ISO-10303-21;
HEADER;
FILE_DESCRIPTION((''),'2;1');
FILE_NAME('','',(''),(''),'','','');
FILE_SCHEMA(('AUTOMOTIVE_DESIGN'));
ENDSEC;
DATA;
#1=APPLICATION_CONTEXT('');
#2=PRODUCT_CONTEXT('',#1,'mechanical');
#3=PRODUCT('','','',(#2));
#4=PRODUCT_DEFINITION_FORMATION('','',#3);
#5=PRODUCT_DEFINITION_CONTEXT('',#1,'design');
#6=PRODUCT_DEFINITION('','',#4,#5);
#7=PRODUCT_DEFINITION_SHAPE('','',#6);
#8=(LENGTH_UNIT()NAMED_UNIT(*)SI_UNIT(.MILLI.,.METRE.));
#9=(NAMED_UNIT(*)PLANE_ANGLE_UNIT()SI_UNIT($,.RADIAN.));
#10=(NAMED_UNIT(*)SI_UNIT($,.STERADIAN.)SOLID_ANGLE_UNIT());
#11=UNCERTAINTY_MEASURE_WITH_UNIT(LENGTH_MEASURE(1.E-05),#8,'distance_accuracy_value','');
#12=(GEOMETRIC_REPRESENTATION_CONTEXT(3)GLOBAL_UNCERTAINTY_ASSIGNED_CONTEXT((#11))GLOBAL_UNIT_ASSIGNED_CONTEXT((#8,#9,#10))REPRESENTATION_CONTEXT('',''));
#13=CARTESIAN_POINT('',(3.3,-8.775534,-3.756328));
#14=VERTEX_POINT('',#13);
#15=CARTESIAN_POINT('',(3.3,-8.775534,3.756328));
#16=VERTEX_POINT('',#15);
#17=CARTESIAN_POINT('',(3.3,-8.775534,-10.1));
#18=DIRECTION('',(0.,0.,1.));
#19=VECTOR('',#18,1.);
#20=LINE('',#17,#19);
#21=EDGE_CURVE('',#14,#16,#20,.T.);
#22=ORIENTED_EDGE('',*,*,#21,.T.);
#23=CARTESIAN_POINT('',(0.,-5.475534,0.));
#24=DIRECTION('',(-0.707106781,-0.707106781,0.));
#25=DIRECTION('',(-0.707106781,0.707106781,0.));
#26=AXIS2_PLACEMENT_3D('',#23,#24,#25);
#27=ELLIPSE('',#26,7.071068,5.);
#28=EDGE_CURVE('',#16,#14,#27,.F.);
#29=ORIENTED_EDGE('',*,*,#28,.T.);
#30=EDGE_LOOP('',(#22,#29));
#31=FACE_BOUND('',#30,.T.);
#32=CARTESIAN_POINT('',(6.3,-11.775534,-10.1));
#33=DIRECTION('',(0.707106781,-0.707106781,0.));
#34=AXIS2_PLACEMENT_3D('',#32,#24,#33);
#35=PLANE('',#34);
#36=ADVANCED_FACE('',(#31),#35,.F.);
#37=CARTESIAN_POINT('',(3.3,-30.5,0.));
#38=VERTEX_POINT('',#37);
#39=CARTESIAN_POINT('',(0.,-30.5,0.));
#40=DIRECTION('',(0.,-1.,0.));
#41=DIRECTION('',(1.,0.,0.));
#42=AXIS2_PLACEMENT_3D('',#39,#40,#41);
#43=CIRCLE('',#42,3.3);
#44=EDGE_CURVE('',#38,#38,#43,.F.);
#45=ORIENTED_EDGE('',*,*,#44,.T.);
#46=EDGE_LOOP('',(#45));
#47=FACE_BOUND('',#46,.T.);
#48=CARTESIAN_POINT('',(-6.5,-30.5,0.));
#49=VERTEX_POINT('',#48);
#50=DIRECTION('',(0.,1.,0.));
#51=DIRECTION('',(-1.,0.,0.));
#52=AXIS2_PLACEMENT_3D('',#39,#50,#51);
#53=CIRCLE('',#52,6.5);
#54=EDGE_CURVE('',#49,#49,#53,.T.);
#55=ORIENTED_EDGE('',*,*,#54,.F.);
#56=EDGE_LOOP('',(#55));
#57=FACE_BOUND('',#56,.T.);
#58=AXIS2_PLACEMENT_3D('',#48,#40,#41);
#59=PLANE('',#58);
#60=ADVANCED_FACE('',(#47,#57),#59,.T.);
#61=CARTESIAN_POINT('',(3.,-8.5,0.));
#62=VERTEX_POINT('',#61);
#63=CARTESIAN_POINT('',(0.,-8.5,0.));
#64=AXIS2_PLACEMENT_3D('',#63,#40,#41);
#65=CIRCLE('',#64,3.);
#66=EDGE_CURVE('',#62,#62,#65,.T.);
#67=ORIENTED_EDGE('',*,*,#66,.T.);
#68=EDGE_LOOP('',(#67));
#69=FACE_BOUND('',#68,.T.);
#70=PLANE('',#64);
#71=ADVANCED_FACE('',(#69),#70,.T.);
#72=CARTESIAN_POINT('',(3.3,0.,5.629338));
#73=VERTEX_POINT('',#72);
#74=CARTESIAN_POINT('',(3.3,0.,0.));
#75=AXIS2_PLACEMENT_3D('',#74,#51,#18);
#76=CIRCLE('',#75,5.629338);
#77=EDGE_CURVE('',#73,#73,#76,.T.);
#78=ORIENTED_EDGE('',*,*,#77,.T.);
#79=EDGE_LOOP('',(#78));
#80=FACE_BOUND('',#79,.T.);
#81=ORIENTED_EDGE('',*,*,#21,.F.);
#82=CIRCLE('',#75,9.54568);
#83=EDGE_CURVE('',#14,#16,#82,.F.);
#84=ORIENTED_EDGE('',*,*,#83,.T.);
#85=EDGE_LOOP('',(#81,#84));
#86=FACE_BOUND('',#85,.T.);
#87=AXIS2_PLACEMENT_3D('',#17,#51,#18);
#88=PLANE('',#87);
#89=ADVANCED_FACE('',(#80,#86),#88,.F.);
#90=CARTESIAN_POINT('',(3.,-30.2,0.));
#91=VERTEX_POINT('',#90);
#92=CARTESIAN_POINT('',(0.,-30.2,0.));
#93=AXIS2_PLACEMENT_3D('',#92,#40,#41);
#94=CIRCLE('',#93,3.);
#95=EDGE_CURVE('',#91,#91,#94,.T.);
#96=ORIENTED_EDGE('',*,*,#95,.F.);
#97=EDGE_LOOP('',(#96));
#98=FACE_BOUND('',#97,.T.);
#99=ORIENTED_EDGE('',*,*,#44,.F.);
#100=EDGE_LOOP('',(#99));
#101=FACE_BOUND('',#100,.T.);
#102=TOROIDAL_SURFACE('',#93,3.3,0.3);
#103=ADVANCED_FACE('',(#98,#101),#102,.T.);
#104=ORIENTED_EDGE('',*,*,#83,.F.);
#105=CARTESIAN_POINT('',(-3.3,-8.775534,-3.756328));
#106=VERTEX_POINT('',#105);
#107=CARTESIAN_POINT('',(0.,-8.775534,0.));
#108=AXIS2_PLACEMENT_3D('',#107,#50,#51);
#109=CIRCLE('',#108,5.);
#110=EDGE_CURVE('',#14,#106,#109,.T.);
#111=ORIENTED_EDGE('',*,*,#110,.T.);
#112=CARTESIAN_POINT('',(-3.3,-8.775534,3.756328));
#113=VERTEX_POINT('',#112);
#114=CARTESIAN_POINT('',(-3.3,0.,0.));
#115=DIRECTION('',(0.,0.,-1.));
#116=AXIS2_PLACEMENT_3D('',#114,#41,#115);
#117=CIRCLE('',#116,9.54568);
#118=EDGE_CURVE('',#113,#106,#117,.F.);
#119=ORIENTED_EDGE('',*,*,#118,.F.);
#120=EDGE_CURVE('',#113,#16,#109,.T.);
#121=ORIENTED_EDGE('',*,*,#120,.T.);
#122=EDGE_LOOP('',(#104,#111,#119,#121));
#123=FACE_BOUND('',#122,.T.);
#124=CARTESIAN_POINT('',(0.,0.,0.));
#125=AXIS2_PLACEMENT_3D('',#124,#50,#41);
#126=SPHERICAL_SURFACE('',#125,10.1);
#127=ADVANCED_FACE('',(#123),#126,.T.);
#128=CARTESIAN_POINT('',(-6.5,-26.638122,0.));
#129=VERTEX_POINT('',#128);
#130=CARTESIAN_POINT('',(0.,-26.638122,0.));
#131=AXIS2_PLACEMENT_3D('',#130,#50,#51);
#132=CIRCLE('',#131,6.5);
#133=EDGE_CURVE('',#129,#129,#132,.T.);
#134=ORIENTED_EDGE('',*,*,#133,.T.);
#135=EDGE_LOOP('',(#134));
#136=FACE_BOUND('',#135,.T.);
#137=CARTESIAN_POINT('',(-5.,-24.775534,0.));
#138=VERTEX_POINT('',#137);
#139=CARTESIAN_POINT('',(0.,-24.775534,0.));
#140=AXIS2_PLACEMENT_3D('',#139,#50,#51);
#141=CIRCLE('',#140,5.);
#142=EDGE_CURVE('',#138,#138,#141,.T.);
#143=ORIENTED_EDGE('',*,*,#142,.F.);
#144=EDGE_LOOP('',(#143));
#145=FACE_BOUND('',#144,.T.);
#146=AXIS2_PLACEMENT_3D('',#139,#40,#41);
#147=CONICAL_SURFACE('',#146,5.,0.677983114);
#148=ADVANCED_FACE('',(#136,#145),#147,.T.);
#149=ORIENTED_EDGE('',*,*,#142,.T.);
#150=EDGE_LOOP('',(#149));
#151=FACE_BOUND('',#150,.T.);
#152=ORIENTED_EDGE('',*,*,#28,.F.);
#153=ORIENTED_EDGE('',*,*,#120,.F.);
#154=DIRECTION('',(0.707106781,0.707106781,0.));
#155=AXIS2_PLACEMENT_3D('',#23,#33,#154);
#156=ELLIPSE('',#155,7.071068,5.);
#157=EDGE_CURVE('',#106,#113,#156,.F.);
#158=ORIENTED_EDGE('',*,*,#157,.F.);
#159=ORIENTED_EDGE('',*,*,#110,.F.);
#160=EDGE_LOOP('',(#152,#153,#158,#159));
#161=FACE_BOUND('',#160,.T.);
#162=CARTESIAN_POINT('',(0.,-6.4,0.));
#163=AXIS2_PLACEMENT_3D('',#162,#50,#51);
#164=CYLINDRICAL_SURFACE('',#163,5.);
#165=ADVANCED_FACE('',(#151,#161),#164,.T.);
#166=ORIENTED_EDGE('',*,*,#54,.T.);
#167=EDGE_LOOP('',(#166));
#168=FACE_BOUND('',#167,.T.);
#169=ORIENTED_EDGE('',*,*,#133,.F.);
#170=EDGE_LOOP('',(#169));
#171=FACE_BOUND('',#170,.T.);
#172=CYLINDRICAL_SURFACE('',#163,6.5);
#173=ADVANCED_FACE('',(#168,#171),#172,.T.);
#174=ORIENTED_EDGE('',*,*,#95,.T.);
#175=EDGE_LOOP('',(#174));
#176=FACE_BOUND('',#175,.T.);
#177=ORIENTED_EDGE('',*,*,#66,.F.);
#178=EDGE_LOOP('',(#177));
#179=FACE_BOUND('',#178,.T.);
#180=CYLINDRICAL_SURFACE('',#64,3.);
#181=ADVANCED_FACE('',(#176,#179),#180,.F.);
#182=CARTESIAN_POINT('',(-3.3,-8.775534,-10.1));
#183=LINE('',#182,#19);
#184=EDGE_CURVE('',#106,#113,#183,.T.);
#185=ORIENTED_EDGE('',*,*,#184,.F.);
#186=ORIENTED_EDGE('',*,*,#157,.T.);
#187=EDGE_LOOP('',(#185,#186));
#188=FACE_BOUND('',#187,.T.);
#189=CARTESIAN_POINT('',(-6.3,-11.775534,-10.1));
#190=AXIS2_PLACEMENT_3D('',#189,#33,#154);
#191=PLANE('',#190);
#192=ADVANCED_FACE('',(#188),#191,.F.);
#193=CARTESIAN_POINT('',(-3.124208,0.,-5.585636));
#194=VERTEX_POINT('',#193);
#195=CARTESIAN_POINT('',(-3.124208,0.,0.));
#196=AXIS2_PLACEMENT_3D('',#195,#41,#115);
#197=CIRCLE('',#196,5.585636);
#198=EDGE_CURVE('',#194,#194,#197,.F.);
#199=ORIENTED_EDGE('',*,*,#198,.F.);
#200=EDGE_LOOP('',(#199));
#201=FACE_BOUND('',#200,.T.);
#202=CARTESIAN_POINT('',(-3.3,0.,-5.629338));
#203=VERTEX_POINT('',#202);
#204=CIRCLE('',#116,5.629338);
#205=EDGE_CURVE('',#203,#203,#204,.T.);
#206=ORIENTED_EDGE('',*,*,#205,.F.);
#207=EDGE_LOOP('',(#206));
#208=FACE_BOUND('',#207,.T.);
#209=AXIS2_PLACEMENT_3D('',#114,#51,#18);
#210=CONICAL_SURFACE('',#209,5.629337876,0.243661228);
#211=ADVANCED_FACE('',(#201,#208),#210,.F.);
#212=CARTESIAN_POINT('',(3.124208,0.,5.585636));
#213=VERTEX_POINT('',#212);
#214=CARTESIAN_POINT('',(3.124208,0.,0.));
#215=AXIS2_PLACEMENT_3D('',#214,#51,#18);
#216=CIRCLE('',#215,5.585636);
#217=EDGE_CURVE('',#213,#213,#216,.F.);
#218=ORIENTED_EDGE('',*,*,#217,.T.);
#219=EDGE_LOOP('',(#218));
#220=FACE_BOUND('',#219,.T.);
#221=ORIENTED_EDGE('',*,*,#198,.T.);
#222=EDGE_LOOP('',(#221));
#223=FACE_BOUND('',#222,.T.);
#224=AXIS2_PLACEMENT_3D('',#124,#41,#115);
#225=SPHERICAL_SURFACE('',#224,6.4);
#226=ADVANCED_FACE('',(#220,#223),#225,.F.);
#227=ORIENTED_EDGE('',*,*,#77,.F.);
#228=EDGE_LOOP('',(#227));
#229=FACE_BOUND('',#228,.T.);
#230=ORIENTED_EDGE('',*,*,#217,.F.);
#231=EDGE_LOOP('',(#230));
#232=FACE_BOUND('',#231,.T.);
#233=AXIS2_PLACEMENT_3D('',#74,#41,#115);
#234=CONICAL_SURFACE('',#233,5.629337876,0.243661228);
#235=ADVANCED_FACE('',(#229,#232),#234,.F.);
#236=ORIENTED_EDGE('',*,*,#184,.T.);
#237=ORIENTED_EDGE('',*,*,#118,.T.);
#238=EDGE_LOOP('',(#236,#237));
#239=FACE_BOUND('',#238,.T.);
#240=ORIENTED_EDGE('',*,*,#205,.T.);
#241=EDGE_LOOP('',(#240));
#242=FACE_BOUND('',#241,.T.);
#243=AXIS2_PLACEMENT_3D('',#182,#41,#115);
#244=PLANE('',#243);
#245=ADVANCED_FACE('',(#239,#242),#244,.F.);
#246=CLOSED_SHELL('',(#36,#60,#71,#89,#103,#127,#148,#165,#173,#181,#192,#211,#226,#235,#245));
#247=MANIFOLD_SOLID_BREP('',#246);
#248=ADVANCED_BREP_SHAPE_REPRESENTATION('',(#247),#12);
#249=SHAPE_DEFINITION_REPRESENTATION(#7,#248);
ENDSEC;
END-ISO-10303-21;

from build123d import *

# Parameters (mm, degrees)
CORTAR_EXTRUIR1_DEPTH      = 34.678925161
CORTAR_EXTRUIR1_DEPTH_BACK = 34.678925161
CROQUIS5_R                 = 3
CORTAR_EXTRUIR3_DEPTH      = 22
REDONDEO5_R                = 0.3
CHAFL_N1_SIZE              = 0.145725928


with BuildPart() as part:
    # Croquis1 → Revolución1 (revolve)
    with BuildSketch(Plane.XY):
        with BuildLine():
            Line((-5, -8.775534172), (-5, -24.775534172))
            Line((-5, -24.775534172), (-6.5, -26.638122331))
            Line((-6.5, -26.638122331), (-6.5, -30.5))
            Line((-6.5, -30.5), (0, -30.5))
            Line((0, -30.5), (0, -6.4))
            ThreePointArc((0, -6.4), (-6.4, 0), (0, 6.4))
            Line((0, 6.4), (0, 10.1))
            ThreePointArc((0, 10.1), (-9.763270332, 2.586223585), (-5, -8.775534172))
        make_face()
    revolve(axis=Axis((0, -6.4, 0), (0, -1, 0)))

    # Croquis2 → Cortar-Extruir1 (cut, two sides: drawn at the far end of the back side and taken through both)
    with BuildSketch(Plane.XY.offset(-CORTAR_EXTRUIR1_DEPTH_BACK)):
        Polygon((6.3, -11.775534172), (3.3, -8.775534172), (3.3, 15.005915622), (11.326938796, 15.005915622), (10.720239286, -11.775534172), align=None)
        Polygon((-3.3, -8.775534172), (-3.3, 15.005915622), (-11.844039482, 15.005915622), (-11.844039482, -11.775534172), (-6.3, -11.775534172), align=None)
    extrude(amount=CORTAR_EXTRUIR1_DEPTH + CORTAR_EXTRUIR1_DEPTH_BACK, mode=Mode.SUBTRACT)

    # Croquis5 → Cortar-Extruir3 (cut)
    with BuildSketch(Plane.XZ.offset(30.5)):
        Circle(CROQUIS5_R)
    extrude(amount=-CORTAR_EXTRUIR3_DEPTH, mode=Mode.SUBTRACT)

    # Redondeo5
    redondeo5_edges = [part.edges().sort_by_distance(p)[0] for p in [
        (-3, -30.5, 0),
    ]]
    fillet(redondeo5_edges, radius=REDONDEO5_R)

    # Chaflán1
    # the kernel refuses this chamfer: 0.2, 0.145725928 mm, written as the material it takes off along each edge
    with BuildSketch(Plane(origin=(3.3, 0, 0), x_dir=(0, 0, -1), z_dir=(0, 1, 0))) as chafl_n1_piece_1:
        with BuildLine():
            Line((5.483611948 + CHAFL_N1_SIZE * 0.999999998153, 0), (5.585635764, 0.175792403))
            ThreePointArc((5.585635764, 0.175792403), (5.536764117, 0.089977708), (5.483611948, 0))
            Line((5.483611948, 0), (5.483611948 + CHAFL_N1_SIZE * 0.999999998153, 0))
        make_face()
    revolve(axis=Axis((3.3, 0, 0), (-1, 0, 0)), mode=Mode.SUBTRACT)
    with BuildSketch(Plane(origin=(-3.3, 0, 0), x_dir=(0, 1, 0), z_dir=(0, 0, 1))) as chafl_n1_piece_2:
        with BuildLine():
            Line((5.483611948 + CHAFL_N1_SIZE * 0.999999998153, 0), (5.585635764, -0.175792403))
            ThreePointArc((5.585635764, -0.175792403), (5.536764117, -0.089977708), (5.483611948, 0))
            Line((5.483611948, 0), (5.483611948 + CHAFL_N1_SIZE * 0.999999998153, 0))
        make_face()
    revolve(axis=Axis((-3.3, 0, 0), (-1, 0, 0)), revolution_arc=180, mode=Mode.SUBTRACT)
    with BuildSketch(Plane(origin=(-3.3, 0, 0), x_dir=(0, -1, 0), z_dir=(0, 0, -1))) as chafl_n1_piece_3:
        with BuildLine():
            Line((5.483611948 + CHAFL_N1_SIZE * 0.999999998153, 0), (5.585635764, -0.175792403))
            ThreePointArc((5.585635764, -0.175792403), (5.536764117, -0.089977708), (5.483611948, 0))
            Line((5.483611948, 0), (5.483611948 + CHAFL_N1_SIZE * 0.999999998153, 0))
        make_face()
    revolve(axis=Axis((-3.3, 0, 0), (-1, 0, 0)), revolution_arc=180, mode=Mode.SUBTRACT)


solid = part.part
